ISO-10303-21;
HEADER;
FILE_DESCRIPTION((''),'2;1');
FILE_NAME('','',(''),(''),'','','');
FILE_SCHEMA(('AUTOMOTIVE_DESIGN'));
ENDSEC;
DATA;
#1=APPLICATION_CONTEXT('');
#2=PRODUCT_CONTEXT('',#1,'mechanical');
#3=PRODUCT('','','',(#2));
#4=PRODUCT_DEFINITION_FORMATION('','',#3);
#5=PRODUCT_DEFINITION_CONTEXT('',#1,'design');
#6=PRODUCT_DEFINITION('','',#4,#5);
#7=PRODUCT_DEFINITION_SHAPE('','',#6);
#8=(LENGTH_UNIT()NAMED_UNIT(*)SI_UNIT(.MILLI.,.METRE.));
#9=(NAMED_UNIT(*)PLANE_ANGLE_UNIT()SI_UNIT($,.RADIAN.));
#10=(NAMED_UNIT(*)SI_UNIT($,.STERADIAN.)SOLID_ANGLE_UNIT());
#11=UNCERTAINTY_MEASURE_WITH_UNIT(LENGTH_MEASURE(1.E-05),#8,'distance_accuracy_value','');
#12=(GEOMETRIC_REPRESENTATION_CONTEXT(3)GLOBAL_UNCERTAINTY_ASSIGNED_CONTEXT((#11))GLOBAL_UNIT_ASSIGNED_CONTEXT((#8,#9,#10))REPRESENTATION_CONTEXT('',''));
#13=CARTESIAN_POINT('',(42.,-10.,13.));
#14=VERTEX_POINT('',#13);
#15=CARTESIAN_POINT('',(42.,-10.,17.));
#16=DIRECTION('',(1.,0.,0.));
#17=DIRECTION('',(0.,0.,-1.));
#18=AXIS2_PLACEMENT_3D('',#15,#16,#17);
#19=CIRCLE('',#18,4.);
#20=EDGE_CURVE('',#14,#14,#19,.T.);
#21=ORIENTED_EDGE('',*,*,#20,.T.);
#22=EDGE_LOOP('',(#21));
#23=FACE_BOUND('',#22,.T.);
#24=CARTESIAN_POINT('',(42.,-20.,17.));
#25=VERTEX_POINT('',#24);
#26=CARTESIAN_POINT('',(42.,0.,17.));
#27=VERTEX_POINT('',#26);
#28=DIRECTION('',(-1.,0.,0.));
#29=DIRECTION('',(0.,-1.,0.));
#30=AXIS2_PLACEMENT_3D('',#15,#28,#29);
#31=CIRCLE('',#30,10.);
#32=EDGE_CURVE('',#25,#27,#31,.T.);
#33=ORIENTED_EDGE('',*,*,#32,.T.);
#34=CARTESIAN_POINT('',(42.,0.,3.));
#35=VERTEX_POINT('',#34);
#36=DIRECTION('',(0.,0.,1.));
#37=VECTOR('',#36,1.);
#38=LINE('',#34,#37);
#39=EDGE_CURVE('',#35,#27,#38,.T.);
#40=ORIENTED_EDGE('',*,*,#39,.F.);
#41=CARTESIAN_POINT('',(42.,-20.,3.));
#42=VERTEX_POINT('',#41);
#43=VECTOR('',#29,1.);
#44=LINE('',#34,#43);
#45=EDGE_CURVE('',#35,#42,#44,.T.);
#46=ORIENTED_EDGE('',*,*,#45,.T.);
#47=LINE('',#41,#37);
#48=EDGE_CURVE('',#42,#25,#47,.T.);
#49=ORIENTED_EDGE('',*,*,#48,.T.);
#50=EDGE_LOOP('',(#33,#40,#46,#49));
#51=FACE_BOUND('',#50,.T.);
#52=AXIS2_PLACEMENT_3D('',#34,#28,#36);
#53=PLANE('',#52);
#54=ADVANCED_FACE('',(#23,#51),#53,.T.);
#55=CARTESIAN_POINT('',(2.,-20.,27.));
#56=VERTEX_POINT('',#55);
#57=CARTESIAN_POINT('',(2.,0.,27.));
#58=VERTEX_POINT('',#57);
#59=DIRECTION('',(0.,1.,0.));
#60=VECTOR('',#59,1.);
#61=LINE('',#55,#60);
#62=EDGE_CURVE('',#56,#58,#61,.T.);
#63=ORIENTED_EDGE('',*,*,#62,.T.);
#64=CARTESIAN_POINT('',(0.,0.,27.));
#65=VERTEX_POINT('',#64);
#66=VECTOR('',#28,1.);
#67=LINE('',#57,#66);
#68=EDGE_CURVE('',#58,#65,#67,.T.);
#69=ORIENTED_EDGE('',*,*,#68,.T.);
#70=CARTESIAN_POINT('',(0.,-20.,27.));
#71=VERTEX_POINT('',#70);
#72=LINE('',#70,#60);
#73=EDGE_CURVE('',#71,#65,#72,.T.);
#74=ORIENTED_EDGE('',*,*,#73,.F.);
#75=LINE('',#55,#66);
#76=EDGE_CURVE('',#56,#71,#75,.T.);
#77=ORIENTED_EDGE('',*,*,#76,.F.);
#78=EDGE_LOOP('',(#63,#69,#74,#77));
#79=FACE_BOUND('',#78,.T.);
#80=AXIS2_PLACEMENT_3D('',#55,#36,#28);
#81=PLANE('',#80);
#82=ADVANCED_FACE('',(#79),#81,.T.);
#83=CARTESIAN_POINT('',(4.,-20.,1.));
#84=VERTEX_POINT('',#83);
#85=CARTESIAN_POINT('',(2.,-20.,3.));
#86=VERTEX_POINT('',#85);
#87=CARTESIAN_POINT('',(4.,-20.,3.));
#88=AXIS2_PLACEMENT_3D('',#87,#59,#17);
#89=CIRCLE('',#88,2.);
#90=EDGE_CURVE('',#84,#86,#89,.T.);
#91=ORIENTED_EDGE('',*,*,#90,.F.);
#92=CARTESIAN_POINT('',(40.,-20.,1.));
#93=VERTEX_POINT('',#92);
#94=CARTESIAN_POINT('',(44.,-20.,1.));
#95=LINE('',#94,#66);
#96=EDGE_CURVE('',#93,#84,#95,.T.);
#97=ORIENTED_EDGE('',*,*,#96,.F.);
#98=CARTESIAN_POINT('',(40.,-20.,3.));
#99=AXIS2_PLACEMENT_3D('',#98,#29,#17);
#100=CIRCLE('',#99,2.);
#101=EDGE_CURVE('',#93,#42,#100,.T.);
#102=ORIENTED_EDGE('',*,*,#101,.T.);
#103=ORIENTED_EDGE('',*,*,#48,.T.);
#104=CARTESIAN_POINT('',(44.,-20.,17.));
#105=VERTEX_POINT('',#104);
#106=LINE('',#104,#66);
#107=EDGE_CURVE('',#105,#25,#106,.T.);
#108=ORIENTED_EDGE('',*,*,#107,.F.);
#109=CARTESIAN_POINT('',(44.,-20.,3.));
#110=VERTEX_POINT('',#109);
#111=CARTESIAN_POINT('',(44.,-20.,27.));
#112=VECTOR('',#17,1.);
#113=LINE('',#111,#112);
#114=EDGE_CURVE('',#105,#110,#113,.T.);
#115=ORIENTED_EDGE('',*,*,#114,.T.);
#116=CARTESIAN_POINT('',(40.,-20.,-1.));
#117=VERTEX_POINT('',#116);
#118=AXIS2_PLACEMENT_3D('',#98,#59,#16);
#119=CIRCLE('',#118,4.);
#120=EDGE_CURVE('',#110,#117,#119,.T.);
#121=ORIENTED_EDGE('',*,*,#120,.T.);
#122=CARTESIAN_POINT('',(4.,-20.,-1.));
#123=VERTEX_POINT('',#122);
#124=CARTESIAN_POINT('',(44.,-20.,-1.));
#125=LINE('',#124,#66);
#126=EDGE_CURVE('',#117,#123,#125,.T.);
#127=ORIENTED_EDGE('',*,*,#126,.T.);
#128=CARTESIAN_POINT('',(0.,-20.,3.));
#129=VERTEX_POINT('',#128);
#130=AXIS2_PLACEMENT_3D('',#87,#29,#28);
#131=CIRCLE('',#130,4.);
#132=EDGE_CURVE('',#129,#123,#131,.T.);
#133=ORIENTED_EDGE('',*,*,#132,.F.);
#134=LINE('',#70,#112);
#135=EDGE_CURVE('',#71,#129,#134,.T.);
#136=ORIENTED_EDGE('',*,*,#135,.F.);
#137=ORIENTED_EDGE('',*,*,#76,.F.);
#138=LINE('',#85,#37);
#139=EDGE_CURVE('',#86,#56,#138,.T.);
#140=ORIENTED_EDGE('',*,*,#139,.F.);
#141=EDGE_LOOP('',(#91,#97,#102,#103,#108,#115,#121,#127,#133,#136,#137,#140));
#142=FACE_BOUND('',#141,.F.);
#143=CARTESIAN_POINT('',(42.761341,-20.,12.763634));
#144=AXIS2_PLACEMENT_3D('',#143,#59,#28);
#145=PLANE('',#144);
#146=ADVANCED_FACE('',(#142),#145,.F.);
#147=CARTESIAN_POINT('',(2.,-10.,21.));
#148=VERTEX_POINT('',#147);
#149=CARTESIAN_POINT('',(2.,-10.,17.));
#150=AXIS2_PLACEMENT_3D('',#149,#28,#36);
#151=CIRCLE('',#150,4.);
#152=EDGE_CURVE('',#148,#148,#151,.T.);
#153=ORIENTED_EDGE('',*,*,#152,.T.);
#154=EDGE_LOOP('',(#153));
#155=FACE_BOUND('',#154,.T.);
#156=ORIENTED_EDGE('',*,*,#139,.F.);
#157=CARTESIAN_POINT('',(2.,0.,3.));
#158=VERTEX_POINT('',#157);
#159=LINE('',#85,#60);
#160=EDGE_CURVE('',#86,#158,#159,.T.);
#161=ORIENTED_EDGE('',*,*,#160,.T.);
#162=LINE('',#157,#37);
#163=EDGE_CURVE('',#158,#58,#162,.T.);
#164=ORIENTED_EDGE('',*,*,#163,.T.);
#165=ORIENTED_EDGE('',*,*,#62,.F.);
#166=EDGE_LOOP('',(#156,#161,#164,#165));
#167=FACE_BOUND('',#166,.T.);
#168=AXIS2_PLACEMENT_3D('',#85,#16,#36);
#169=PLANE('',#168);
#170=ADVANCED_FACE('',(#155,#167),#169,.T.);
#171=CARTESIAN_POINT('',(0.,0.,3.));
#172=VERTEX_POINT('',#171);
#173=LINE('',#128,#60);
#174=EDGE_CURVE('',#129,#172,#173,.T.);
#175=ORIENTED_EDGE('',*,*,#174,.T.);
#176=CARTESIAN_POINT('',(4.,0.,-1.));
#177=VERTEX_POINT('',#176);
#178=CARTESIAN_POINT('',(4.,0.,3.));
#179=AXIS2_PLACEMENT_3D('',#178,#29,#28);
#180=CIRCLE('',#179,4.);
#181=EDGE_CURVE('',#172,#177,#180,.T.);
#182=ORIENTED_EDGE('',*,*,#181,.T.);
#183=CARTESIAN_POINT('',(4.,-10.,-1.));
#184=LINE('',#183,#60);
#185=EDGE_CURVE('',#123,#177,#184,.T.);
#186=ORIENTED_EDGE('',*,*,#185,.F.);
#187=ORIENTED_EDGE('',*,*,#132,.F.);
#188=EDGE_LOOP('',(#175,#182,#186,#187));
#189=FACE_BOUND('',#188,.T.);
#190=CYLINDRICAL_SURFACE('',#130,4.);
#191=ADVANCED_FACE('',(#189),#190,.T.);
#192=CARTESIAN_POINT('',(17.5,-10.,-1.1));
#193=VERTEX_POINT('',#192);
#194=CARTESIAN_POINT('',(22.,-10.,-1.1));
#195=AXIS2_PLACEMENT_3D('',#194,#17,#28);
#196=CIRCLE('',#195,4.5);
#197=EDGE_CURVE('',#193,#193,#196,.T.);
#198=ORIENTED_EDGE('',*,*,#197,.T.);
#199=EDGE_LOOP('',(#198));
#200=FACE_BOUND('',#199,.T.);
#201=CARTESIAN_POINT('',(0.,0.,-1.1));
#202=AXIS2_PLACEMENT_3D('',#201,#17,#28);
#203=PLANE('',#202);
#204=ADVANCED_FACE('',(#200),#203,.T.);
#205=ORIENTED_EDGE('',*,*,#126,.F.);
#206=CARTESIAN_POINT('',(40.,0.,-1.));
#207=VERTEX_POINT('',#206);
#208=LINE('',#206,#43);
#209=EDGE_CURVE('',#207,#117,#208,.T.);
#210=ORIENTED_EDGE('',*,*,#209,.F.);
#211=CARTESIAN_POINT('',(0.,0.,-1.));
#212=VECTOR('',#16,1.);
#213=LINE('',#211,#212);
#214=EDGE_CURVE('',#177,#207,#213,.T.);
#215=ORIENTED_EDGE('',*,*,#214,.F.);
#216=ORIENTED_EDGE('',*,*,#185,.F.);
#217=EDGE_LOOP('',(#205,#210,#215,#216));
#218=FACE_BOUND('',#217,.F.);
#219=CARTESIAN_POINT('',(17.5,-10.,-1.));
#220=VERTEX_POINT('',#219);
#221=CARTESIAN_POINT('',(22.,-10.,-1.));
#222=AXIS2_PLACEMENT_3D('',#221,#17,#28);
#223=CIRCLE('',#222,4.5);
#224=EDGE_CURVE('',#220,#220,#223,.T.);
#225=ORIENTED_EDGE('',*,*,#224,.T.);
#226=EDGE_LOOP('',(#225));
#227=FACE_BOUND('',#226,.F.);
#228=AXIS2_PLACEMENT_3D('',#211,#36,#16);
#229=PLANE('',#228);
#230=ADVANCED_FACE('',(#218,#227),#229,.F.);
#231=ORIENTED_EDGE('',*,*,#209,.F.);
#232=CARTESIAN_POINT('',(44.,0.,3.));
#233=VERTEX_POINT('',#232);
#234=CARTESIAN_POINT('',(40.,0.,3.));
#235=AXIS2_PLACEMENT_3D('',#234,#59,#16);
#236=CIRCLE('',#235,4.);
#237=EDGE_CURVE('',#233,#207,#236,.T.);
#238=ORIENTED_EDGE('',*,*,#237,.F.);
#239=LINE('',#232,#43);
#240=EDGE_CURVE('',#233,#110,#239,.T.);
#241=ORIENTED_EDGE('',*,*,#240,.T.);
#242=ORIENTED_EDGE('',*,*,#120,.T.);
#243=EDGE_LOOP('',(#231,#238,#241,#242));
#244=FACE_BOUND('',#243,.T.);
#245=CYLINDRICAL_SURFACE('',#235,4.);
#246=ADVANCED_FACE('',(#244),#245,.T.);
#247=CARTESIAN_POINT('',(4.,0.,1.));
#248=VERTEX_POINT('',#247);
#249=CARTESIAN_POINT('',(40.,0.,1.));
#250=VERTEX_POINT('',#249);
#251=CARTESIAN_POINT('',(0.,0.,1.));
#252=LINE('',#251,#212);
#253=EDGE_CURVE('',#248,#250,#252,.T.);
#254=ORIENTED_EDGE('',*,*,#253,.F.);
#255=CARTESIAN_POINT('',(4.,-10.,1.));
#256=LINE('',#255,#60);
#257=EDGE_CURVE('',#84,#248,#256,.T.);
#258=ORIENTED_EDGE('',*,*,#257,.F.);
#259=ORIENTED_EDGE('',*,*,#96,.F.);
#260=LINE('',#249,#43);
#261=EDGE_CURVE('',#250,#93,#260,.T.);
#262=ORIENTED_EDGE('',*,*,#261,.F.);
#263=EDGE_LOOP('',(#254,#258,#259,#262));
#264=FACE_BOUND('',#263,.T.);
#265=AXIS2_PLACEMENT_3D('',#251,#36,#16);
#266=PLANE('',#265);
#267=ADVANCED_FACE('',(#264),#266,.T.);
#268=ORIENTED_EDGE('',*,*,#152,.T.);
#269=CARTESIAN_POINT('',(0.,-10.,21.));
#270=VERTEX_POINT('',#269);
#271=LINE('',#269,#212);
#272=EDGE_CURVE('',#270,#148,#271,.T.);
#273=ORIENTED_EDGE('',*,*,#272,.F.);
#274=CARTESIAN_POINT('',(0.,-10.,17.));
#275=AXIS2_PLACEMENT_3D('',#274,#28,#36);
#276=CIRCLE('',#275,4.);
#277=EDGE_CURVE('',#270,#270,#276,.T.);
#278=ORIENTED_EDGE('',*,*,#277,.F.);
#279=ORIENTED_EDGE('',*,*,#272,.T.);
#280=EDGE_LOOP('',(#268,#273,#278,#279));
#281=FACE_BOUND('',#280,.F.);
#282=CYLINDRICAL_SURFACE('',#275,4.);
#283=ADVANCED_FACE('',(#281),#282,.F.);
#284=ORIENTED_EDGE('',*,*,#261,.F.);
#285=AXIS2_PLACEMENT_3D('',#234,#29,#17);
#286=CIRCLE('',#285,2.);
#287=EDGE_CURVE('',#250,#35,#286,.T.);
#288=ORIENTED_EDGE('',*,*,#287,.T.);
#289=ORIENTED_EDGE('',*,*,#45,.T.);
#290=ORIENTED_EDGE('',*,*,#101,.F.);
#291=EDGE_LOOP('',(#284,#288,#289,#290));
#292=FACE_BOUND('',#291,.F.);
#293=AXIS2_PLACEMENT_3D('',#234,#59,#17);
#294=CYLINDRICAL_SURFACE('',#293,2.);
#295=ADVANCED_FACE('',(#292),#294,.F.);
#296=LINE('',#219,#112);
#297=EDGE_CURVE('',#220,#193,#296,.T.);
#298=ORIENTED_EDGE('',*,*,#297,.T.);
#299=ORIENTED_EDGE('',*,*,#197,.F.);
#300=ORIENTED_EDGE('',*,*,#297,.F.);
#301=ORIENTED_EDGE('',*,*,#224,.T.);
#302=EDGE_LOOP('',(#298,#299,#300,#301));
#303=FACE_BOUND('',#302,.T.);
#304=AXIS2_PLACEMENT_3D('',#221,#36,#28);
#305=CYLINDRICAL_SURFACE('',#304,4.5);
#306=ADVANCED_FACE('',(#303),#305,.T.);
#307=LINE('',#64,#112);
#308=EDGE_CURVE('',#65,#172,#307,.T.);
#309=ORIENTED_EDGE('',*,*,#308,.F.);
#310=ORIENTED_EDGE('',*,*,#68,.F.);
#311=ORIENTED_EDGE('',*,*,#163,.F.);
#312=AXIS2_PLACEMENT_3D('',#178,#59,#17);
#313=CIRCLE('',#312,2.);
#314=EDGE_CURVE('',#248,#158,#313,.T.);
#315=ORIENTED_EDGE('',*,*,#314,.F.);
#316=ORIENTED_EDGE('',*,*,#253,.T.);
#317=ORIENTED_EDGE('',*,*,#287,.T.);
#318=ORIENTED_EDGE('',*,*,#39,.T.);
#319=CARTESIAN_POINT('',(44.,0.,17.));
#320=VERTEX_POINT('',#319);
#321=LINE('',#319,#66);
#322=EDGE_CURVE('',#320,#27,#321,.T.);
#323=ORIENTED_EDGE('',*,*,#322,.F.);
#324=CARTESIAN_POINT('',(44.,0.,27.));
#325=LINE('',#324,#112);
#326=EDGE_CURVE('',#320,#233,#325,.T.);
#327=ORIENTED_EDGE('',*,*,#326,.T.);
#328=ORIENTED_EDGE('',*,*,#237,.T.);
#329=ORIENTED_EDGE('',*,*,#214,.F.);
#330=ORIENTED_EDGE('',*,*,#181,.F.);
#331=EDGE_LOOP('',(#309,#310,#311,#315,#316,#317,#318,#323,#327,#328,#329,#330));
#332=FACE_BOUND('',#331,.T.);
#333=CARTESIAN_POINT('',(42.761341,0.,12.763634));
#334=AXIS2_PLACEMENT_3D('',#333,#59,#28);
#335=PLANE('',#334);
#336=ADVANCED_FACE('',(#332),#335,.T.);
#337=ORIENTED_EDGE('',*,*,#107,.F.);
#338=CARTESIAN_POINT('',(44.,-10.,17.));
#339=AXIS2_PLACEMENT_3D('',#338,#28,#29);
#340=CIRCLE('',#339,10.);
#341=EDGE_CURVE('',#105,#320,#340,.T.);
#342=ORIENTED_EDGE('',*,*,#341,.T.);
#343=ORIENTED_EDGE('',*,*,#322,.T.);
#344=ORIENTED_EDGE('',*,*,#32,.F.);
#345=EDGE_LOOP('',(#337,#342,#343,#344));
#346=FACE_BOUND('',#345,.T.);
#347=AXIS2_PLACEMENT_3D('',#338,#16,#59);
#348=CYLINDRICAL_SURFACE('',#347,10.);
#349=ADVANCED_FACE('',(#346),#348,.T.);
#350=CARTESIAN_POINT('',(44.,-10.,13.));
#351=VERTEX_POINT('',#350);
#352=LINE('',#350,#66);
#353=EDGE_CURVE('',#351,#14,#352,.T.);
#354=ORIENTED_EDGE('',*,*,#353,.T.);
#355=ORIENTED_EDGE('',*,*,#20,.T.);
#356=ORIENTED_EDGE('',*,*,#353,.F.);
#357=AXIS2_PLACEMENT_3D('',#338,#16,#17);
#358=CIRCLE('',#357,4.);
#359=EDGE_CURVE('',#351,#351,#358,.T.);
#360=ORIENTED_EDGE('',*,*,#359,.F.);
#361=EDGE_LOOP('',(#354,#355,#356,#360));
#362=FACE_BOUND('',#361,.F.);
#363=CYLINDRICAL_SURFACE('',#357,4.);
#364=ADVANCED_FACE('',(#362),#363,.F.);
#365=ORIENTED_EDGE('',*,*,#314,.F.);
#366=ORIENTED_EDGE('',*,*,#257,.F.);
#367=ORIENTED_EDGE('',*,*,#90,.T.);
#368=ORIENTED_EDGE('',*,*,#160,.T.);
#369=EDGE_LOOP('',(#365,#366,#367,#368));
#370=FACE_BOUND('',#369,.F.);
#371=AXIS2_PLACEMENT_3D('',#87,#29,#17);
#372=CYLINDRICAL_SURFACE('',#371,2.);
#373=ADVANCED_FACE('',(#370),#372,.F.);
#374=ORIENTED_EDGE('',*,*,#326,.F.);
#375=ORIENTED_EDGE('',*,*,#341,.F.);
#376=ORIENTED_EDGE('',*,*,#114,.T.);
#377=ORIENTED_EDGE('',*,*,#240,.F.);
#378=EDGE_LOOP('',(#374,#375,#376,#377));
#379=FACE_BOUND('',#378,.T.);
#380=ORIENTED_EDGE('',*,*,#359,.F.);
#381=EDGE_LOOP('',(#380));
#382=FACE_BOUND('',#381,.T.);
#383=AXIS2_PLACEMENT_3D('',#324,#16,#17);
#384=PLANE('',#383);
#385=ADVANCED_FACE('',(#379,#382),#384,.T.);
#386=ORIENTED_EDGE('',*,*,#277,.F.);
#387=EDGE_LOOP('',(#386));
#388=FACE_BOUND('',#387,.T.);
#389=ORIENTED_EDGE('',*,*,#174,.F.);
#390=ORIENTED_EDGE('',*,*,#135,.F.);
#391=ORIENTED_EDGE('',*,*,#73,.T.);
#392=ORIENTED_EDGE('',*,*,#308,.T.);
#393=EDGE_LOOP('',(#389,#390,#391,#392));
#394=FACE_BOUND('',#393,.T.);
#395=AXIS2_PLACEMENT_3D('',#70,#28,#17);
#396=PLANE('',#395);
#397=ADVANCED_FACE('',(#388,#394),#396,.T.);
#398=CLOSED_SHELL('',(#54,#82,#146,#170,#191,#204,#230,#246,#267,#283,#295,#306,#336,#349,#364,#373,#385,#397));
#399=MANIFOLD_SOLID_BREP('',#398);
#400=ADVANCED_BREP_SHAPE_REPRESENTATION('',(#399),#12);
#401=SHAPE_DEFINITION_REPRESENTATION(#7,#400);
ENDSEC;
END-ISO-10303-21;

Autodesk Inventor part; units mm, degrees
ref_plane "YZ Plane" through (0, 0, 0) normal (1, 0, 0) x (0, 1, 0)
ref_plane "XZ Plane" through (0, 0, 0) normal (0, 1, 0) x (-1, 0, 0)
ref_plane "XY Plane" through (0, 0, 0) normal (0, 0, 1) x (1, 0, 0)
sketch "Sketch1" plane through (0, 0, 0) normal (0, 0, 1) x (1, 0, 0)
  line L0 (0, 0) -> (44, 0)
  line L1 (44, 0) -> (44, -20)
  line L2 (44, -20) -> (0, -20)
  line L3 (0, -20) -> (0, 0)
  dimension "d0" = 44
  dimension "d1" = 20
extrude "Extrusion1" add sketch "Sketch1" along normal mid plane 2
sketch "Sketch2" plane through (42, 0, -1) normal (1, 0, 0) x (0, 1, 0)
  line L0 (-20, 0) -> (0, 0)
  line L1 (0, 0) -> (0, 28)
  line L2 (0, 28) -> (-20, 28)
  line L3 (-20, 28) -> (-20, 0)
edge flange "Flange1" height 28 angle 90 thickness 2 bend radius 2 thickness toward (1, 0, 0) relief tear relief width 2 relief depth 1 corner gap 2 corner form 0 edges at (44, -10, 1) (0, -10, 1) wall of the first edge with corners at (42, -20, -1) (42, 0, -1) (42, 0, 27) (42, -20, 27)
bend "Bend1"
corner "Corner1"
sketch "Sketch3" plane through (44, -20, 27) normal (1, 0, 0) x (0, 0, -1)
  line L0 (24, 0) -> (0, 0) projected
  line L1 (0, 0) -> (0, 20) projected
  line L2 (0, 0) -> (0, 20)
  line L3 (0, 20) -> (10, 20)
  line L4 (0, 20) -> (24, 20) projected
  line L5 (0, 0) -> (10, 0)
  arc A0 (10, 20) -> (10, 0) centre (10, 10) ccw
  circle A1 centre (10, 10) radius 4
  point P0 (27, 20)
  point P1 (0, 10)
  dimension "d15" = 10
  dimension "d16" = 8
extrude "Cut1" cut sketch "Sketch3" against normal blind 2
sketch "Sketch4" plane through (0, -20, 27) normal (-1, 0, 0) x (0, 0, 1)
  circle A0 centre (-10, 10) radius 4 projected
  circle A1 centre (-10, 10) radius 4
  point P0 (-27, 20)
extrude "Cut2" cut sketch "Sketch4" against normal blind 2
sketch "Sketch5" plane through (0, 0, -1) normal (0, 0, -1) x (-1, 0, 0)
  line L0 (-4, -20) -> (-4, 0) projected
  line L1 (-4, 0) -> (-40, 0) projected
  line L2 (-40, -20) -> (-4, -20) projected
  line L3 (-40, 0) -> (-40, -20) projected
  circle A0 centre (-22, -10) radius 4.5
  point P0 (0, 0)
  dimension "d21" = 9
  dimension "d22" = 18
  dimension "d23" = 10
extrude "Extrusion2" add sketch "Sketch5" along normal blind 0.1 contours A0
equation "\"d17\" = Thickness"
equation "\"d19\" = Thickness"
equation "\"d4\" = Thickness"
equation "\"d5\" = BendReliefWidth"
equation "\"d6\" = BendReliefDepth"
equation "\"d7\" = MinimumRemnant"
equation "\"d8\" = TransitionRadius"
equation "\"d11\" = BendRadius"
equation "\"d12\" = CornerReliefSize"
equation "\"d13\" = GapSize"
equation "\"d14\" = JacobiRadiusSize"
equation "\"BendRadius\" = Thickness"
equation "\"BendReliefWidth\" = Thickness"
equation "\"BendReliefDepth\" = 0.5 * Thickness"
equation "\"CornerReliefSize\" = 4 * Thickness"
equation "\"MinimumRemnant\" = 2 * Thickness"
equation "\"TransitionRadius\" = BendRadius"
equation "\"JacobiRadiusSize\" = BendRadius"
equation "\"GapSize\" = Thickness"
equation "\"Thickness\" = 2"
properties part number "SHEET_METAL2"
